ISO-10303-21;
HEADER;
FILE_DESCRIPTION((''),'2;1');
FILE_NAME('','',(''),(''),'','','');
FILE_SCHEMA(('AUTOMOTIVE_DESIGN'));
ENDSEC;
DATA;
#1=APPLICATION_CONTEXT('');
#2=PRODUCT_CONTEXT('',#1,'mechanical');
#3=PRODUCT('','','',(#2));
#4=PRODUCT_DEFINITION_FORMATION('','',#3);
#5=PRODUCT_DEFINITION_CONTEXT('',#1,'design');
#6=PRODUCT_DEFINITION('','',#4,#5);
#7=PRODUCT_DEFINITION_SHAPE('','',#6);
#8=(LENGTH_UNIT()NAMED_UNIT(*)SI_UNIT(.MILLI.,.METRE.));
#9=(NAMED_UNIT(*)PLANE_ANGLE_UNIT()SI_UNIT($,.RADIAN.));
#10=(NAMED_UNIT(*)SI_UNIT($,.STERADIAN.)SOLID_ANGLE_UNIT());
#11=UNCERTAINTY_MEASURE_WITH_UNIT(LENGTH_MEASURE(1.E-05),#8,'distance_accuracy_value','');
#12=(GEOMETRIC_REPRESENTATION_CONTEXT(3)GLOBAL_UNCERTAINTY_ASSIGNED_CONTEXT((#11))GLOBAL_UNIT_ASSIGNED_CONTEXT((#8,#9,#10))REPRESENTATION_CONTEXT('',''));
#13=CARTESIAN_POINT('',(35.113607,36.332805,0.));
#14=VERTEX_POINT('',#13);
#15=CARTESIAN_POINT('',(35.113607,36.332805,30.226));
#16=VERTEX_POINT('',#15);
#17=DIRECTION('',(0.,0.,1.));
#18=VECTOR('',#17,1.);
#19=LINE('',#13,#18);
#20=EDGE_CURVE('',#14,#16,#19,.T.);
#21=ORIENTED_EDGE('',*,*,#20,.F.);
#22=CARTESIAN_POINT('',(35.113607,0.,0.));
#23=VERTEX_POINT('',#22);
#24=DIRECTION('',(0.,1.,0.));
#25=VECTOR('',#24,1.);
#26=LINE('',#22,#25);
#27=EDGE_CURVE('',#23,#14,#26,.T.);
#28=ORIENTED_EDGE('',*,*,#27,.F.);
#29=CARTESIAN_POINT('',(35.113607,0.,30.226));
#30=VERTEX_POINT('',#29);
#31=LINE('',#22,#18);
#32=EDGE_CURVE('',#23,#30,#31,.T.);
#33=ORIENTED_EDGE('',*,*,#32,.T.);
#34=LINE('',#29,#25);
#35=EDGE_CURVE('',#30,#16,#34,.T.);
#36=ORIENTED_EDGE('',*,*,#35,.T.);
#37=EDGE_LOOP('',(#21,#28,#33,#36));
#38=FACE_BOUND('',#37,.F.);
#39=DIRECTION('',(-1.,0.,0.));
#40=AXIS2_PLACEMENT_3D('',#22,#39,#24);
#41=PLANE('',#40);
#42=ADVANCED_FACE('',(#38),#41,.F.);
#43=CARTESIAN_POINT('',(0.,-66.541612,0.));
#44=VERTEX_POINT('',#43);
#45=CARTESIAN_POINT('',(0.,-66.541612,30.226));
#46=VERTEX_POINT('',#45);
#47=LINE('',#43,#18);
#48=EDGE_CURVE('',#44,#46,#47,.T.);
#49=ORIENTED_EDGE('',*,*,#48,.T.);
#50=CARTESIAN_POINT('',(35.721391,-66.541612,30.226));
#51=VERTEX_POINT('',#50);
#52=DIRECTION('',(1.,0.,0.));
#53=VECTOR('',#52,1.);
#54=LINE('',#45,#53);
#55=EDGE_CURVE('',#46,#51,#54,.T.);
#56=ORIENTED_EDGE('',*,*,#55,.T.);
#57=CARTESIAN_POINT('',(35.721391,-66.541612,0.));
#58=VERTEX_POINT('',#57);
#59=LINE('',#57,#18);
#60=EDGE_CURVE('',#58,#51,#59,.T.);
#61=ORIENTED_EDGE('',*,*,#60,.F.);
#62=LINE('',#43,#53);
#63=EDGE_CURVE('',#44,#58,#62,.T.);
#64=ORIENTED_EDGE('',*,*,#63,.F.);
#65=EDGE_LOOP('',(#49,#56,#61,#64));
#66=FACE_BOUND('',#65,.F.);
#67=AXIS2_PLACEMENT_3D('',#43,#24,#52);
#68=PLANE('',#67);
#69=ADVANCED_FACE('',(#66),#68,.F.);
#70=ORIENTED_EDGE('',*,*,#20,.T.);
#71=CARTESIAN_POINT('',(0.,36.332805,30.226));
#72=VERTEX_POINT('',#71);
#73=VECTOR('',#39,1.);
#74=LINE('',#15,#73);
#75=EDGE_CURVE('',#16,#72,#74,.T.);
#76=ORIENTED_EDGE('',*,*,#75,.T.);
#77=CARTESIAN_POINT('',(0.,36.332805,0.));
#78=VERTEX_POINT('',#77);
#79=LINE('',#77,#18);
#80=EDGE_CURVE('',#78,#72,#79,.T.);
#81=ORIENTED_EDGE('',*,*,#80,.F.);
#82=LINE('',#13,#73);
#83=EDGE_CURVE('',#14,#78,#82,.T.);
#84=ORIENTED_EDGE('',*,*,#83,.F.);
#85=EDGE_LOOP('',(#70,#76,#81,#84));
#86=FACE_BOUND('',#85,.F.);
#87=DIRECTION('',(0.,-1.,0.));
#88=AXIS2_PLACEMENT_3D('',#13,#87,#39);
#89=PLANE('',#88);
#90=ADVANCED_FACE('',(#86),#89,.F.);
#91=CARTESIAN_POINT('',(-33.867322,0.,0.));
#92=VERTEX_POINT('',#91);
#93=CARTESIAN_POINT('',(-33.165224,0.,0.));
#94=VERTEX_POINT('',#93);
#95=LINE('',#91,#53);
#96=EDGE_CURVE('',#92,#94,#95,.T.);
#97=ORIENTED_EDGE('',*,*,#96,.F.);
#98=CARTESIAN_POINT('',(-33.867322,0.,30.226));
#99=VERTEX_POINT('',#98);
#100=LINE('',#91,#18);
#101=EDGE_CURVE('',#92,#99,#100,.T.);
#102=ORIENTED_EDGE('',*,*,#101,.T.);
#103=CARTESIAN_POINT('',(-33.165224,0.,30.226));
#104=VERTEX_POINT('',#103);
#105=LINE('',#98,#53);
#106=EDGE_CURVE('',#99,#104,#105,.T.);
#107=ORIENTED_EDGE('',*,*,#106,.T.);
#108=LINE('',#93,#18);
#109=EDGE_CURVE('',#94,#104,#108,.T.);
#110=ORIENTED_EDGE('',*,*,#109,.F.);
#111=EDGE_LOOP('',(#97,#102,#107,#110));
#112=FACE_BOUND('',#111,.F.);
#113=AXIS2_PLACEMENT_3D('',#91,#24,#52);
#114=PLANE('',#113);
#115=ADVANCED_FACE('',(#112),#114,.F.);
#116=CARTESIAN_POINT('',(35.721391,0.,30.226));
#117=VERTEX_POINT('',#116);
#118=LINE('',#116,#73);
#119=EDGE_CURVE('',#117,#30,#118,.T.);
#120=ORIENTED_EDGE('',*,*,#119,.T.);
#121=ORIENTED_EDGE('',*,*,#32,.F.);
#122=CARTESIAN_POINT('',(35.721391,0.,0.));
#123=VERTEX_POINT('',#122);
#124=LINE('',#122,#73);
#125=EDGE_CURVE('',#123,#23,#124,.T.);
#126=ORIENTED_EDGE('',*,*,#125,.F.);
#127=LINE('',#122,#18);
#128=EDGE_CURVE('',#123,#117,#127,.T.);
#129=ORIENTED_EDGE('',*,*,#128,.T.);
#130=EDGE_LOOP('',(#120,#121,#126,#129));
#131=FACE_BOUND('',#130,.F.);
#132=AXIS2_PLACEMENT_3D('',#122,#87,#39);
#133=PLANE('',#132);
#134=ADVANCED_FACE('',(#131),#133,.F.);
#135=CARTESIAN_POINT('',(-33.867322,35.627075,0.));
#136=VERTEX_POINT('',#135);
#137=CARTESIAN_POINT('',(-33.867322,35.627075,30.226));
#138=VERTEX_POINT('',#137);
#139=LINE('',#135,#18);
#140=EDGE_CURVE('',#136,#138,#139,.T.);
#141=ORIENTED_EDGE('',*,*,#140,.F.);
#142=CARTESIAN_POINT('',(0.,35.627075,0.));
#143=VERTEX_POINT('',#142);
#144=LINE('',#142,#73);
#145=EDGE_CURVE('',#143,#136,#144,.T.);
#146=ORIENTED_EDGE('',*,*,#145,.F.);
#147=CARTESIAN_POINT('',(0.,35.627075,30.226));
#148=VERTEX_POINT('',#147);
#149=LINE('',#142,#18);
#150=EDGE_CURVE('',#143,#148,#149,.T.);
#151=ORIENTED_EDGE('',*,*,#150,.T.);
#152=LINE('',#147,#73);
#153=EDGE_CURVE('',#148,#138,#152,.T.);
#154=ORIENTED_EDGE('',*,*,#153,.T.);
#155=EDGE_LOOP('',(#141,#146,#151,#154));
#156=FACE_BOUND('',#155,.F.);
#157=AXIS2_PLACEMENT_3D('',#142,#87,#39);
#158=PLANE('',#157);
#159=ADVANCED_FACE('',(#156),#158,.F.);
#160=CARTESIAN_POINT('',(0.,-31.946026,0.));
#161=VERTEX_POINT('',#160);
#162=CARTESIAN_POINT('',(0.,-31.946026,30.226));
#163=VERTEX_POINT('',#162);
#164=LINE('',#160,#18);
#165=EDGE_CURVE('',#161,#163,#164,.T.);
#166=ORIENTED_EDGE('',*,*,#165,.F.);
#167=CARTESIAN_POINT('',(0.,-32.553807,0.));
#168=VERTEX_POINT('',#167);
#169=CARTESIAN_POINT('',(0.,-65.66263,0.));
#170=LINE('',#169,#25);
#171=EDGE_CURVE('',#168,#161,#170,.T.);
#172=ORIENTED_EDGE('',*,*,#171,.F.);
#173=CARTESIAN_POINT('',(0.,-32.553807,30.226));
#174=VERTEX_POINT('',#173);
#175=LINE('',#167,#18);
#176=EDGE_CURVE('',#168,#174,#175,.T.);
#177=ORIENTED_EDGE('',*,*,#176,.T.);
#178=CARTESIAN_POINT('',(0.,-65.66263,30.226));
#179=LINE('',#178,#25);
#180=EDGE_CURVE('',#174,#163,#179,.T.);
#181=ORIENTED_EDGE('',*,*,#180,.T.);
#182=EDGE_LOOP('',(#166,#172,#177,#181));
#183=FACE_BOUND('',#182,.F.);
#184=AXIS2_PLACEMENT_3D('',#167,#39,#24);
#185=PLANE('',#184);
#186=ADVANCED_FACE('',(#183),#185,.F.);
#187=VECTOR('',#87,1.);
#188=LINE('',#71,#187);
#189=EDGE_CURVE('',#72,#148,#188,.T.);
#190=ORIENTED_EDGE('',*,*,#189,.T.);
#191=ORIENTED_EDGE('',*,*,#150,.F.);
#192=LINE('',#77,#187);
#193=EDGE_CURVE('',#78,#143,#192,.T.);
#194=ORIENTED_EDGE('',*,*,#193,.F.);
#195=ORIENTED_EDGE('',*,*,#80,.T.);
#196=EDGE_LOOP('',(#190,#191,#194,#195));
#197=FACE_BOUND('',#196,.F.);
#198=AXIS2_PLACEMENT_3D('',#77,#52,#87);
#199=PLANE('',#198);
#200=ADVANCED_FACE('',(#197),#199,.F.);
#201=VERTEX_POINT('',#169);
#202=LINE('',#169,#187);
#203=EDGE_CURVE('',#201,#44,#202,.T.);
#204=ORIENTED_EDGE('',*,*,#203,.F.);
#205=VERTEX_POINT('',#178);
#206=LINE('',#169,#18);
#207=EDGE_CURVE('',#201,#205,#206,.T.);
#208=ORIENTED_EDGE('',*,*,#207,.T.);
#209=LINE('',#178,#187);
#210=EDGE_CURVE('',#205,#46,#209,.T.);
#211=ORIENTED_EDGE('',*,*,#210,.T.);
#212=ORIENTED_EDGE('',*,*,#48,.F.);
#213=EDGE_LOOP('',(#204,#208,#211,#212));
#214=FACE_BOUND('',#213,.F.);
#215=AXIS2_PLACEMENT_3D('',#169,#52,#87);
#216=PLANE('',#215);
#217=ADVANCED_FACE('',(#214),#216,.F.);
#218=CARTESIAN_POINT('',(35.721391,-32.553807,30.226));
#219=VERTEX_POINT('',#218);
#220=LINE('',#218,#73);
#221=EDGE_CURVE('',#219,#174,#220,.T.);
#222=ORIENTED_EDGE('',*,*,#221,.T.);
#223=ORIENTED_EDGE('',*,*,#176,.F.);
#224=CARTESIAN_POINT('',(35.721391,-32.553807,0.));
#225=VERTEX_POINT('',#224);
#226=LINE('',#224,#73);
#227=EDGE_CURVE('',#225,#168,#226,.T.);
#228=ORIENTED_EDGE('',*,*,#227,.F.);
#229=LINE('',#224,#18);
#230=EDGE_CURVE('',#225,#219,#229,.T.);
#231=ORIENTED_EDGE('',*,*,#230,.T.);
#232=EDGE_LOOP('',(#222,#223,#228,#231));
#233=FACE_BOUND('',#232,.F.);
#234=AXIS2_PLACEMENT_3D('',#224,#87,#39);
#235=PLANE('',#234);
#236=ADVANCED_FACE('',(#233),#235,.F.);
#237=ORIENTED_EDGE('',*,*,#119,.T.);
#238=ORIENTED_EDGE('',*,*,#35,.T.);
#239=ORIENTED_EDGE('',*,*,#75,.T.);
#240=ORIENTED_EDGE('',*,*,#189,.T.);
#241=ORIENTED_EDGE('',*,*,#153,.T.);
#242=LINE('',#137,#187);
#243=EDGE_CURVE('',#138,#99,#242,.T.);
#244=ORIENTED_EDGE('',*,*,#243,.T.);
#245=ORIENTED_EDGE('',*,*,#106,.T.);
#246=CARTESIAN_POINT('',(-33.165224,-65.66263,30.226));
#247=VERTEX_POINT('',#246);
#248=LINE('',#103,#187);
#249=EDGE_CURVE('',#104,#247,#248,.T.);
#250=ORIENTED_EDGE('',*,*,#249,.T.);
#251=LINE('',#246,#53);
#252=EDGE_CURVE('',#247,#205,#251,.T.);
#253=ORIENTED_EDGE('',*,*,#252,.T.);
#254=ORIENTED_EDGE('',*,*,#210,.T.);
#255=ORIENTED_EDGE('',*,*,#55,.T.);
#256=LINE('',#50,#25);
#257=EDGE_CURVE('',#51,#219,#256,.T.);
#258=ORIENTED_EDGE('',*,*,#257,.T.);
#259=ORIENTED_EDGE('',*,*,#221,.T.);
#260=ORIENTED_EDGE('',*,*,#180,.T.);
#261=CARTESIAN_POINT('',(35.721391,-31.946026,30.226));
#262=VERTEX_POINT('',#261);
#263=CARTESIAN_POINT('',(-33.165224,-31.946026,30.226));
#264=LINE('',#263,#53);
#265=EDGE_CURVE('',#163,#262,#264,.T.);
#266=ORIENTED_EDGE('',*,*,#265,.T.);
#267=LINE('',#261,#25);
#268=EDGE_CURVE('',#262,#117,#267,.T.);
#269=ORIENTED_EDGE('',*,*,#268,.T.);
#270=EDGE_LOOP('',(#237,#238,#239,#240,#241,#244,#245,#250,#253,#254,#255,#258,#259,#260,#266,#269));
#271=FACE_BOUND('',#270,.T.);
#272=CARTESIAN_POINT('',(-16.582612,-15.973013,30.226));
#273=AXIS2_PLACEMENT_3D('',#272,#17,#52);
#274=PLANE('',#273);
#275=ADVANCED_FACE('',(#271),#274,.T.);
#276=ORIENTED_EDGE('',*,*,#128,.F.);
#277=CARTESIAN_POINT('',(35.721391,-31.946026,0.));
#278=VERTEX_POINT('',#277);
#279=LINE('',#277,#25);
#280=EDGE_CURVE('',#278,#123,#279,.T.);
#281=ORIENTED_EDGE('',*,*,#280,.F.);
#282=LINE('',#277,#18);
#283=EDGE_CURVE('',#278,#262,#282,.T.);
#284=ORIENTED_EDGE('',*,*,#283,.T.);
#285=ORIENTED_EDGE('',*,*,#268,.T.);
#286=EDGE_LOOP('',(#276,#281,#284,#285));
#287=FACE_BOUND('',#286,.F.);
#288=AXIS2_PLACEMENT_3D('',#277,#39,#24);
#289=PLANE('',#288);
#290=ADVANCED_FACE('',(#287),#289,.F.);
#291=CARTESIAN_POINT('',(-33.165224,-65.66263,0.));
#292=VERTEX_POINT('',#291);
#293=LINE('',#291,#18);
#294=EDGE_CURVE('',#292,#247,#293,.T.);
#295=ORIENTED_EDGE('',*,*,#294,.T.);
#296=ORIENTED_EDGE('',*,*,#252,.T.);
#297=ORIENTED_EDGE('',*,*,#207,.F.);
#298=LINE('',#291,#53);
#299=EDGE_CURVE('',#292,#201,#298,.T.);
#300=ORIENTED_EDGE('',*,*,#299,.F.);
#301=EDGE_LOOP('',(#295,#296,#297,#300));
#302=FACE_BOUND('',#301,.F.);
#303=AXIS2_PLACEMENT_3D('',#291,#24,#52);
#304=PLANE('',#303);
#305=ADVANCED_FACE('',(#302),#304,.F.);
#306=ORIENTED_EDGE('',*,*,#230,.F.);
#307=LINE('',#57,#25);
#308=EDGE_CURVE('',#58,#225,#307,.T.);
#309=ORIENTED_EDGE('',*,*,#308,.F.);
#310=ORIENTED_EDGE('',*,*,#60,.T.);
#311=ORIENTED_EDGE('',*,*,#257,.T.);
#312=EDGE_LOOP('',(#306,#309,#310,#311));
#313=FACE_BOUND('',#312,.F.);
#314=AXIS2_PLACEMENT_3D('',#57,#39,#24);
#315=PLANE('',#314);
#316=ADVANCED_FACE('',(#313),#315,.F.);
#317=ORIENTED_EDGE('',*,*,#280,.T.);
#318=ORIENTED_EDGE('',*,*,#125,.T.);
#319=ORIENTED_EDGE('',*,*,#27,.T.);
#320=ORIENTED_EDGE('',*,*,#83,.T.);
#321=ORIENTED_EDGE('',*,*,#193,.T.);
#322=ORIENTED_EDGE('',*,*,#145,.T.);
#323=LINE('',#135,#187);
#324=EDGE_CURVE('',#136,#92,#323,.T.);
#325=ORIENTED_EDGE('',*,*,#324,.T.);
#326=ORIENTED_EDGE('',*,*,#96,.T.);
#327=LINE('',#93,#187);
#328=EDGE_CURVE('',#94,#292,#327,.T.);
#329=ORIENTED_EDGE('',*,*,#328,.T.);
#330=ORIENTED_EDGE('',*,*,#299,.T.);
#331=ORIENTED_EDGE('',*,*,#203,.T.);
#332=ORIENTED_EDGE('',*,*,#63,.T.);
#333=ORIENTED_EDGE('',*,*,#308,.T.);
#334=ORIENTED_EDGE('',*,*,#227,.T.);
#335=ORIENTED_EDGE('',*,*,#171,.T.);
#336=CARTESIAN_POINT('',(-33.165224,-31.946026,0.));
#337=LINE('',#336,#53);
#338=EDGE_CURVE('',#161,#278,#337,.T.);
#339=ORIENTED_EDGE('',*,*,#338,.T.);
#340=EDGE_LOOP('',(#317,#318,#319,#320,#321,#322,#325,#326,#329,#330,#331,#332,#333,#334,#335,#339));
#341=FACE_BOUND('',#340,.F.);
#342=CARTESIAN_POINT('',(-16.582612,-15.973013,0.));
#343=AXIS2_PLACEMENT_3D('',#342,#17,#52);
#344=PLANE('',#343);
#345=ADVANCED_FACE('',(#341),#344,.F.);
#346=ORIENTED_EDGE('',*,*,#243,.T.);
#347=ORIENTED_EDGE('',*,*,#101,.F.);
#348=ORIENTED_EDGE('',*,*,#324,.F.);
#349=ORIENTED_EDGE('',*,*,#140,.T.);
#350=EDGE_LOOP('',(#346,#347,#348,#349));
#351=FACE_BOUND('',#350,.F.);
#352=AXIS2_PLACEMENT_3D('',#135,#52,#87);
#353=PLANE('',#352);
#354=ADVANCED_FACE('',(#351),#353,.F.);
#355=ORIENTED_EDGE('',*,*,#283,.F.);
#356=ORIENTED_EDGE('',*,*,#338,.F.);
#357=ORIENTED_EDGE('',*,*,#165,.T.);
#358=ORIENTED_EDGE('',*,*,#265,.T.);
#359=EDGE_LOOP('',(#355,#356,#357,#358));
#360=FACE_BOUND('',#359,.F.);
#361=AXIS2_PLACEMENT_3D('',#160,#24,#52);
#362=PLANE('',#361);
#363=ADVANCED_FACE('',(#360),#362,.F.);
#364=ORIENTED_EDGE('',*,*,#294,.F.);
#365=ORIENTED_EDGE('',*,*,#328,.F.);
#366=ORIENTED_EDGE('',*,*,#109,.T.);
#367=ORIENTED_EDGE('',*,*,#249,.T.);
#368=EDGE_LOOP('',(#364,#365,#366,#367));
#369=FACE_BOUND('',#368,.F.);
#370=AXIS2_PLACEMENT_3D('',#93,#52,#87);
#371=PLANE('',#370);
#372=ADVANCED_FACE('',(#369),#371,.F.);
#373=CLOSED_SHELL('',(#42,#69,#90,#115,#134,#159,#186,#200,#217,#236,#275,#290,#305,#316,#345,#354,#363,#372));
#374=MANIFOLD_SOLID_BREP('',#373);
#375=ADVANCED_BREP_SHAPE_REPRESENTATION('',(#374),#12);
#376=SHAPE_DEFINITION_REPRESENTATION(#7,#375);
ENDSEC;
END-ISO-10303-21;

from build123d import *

# Parameters (mm, degrees)
F0_W     = 39.7309437394
F0_H     = 35.8594581485
F0_H_2   = 34.1520495713
F0_W_2   = 39.8523285985
F1_DEPTH = 25.4
F2_W     = 39.7309437394
F2_H     = 34.1520495713
F3_DEPTH = 25.4
F5_W     = 33.1652238965
F5_H     = 31.9460257888
F6_DEPTH = 30.226


with BuildPart() as f1:
    # F0 (on Top) → F1 (new body)
    with BuildSketch(Plane.XY):
        with Locations((-19.8654718697, 17.9297290742)):
            Rectangle(F0_W, F0_H)
        with Locations((-19.8654718697, -17.0760247856)):
            Rectangle(F0_W, F0_H_2)
        with Locations((19.9261642992, 17.9297290742)):
            Rectangle(F0_W_2, F0_H)
    extrude(amount=F1_DEPTH)

    # F2 (on face) → F3 (join)
    with BuildSketch(Plane.XY.offset(25.4)):
        with Locations((-19.8654718697, -17.0760247856)):
            Rectangle(F2_W, F2_H)
    extrude(amount=F3_DEPTH)


with BuildPart() as f6:
    # F5 (on Top) → F6 (new body)
    with BuildSketch(Plane.XY):
        with Locations((-16.5826119483, -15.9730128944)):
            Rectangle(F5_W, F5_H)
        Polygon((-33.1652238965, 0), (0, 0), (0, 35.6270745397), (-33.8673219085, 35.6270745397), (-33.8673219085, 0), align=None)
        Polygon((0, 35.6270745397), (0, 0), (35.113606602, 0), (35.113606602, 36.3328047097), (0, 36.3328047097), align=None)
        Polygon((35.113606602, 0), (0, 0), (0, -31.9460257888), (35.7213914394, -31.9460257888), (35.7213914394, 0), align=None)
        Polygon((0, -32.553806901), (0, -31.9460257888), (-33.1652238965, -31.9460257888), (-33.1652238965, -65.6626299024), (0, -65.6626299024), align=None)
        Polygon((35.7213914394, -32.553806901), (0, -32.553806901), (0, -65.6626299024), (0, -66.5416121483), (35.7213914394, -66.5416121483), align=None)
    extrude(amount=F6_DEPTH)


solid = f6.part
